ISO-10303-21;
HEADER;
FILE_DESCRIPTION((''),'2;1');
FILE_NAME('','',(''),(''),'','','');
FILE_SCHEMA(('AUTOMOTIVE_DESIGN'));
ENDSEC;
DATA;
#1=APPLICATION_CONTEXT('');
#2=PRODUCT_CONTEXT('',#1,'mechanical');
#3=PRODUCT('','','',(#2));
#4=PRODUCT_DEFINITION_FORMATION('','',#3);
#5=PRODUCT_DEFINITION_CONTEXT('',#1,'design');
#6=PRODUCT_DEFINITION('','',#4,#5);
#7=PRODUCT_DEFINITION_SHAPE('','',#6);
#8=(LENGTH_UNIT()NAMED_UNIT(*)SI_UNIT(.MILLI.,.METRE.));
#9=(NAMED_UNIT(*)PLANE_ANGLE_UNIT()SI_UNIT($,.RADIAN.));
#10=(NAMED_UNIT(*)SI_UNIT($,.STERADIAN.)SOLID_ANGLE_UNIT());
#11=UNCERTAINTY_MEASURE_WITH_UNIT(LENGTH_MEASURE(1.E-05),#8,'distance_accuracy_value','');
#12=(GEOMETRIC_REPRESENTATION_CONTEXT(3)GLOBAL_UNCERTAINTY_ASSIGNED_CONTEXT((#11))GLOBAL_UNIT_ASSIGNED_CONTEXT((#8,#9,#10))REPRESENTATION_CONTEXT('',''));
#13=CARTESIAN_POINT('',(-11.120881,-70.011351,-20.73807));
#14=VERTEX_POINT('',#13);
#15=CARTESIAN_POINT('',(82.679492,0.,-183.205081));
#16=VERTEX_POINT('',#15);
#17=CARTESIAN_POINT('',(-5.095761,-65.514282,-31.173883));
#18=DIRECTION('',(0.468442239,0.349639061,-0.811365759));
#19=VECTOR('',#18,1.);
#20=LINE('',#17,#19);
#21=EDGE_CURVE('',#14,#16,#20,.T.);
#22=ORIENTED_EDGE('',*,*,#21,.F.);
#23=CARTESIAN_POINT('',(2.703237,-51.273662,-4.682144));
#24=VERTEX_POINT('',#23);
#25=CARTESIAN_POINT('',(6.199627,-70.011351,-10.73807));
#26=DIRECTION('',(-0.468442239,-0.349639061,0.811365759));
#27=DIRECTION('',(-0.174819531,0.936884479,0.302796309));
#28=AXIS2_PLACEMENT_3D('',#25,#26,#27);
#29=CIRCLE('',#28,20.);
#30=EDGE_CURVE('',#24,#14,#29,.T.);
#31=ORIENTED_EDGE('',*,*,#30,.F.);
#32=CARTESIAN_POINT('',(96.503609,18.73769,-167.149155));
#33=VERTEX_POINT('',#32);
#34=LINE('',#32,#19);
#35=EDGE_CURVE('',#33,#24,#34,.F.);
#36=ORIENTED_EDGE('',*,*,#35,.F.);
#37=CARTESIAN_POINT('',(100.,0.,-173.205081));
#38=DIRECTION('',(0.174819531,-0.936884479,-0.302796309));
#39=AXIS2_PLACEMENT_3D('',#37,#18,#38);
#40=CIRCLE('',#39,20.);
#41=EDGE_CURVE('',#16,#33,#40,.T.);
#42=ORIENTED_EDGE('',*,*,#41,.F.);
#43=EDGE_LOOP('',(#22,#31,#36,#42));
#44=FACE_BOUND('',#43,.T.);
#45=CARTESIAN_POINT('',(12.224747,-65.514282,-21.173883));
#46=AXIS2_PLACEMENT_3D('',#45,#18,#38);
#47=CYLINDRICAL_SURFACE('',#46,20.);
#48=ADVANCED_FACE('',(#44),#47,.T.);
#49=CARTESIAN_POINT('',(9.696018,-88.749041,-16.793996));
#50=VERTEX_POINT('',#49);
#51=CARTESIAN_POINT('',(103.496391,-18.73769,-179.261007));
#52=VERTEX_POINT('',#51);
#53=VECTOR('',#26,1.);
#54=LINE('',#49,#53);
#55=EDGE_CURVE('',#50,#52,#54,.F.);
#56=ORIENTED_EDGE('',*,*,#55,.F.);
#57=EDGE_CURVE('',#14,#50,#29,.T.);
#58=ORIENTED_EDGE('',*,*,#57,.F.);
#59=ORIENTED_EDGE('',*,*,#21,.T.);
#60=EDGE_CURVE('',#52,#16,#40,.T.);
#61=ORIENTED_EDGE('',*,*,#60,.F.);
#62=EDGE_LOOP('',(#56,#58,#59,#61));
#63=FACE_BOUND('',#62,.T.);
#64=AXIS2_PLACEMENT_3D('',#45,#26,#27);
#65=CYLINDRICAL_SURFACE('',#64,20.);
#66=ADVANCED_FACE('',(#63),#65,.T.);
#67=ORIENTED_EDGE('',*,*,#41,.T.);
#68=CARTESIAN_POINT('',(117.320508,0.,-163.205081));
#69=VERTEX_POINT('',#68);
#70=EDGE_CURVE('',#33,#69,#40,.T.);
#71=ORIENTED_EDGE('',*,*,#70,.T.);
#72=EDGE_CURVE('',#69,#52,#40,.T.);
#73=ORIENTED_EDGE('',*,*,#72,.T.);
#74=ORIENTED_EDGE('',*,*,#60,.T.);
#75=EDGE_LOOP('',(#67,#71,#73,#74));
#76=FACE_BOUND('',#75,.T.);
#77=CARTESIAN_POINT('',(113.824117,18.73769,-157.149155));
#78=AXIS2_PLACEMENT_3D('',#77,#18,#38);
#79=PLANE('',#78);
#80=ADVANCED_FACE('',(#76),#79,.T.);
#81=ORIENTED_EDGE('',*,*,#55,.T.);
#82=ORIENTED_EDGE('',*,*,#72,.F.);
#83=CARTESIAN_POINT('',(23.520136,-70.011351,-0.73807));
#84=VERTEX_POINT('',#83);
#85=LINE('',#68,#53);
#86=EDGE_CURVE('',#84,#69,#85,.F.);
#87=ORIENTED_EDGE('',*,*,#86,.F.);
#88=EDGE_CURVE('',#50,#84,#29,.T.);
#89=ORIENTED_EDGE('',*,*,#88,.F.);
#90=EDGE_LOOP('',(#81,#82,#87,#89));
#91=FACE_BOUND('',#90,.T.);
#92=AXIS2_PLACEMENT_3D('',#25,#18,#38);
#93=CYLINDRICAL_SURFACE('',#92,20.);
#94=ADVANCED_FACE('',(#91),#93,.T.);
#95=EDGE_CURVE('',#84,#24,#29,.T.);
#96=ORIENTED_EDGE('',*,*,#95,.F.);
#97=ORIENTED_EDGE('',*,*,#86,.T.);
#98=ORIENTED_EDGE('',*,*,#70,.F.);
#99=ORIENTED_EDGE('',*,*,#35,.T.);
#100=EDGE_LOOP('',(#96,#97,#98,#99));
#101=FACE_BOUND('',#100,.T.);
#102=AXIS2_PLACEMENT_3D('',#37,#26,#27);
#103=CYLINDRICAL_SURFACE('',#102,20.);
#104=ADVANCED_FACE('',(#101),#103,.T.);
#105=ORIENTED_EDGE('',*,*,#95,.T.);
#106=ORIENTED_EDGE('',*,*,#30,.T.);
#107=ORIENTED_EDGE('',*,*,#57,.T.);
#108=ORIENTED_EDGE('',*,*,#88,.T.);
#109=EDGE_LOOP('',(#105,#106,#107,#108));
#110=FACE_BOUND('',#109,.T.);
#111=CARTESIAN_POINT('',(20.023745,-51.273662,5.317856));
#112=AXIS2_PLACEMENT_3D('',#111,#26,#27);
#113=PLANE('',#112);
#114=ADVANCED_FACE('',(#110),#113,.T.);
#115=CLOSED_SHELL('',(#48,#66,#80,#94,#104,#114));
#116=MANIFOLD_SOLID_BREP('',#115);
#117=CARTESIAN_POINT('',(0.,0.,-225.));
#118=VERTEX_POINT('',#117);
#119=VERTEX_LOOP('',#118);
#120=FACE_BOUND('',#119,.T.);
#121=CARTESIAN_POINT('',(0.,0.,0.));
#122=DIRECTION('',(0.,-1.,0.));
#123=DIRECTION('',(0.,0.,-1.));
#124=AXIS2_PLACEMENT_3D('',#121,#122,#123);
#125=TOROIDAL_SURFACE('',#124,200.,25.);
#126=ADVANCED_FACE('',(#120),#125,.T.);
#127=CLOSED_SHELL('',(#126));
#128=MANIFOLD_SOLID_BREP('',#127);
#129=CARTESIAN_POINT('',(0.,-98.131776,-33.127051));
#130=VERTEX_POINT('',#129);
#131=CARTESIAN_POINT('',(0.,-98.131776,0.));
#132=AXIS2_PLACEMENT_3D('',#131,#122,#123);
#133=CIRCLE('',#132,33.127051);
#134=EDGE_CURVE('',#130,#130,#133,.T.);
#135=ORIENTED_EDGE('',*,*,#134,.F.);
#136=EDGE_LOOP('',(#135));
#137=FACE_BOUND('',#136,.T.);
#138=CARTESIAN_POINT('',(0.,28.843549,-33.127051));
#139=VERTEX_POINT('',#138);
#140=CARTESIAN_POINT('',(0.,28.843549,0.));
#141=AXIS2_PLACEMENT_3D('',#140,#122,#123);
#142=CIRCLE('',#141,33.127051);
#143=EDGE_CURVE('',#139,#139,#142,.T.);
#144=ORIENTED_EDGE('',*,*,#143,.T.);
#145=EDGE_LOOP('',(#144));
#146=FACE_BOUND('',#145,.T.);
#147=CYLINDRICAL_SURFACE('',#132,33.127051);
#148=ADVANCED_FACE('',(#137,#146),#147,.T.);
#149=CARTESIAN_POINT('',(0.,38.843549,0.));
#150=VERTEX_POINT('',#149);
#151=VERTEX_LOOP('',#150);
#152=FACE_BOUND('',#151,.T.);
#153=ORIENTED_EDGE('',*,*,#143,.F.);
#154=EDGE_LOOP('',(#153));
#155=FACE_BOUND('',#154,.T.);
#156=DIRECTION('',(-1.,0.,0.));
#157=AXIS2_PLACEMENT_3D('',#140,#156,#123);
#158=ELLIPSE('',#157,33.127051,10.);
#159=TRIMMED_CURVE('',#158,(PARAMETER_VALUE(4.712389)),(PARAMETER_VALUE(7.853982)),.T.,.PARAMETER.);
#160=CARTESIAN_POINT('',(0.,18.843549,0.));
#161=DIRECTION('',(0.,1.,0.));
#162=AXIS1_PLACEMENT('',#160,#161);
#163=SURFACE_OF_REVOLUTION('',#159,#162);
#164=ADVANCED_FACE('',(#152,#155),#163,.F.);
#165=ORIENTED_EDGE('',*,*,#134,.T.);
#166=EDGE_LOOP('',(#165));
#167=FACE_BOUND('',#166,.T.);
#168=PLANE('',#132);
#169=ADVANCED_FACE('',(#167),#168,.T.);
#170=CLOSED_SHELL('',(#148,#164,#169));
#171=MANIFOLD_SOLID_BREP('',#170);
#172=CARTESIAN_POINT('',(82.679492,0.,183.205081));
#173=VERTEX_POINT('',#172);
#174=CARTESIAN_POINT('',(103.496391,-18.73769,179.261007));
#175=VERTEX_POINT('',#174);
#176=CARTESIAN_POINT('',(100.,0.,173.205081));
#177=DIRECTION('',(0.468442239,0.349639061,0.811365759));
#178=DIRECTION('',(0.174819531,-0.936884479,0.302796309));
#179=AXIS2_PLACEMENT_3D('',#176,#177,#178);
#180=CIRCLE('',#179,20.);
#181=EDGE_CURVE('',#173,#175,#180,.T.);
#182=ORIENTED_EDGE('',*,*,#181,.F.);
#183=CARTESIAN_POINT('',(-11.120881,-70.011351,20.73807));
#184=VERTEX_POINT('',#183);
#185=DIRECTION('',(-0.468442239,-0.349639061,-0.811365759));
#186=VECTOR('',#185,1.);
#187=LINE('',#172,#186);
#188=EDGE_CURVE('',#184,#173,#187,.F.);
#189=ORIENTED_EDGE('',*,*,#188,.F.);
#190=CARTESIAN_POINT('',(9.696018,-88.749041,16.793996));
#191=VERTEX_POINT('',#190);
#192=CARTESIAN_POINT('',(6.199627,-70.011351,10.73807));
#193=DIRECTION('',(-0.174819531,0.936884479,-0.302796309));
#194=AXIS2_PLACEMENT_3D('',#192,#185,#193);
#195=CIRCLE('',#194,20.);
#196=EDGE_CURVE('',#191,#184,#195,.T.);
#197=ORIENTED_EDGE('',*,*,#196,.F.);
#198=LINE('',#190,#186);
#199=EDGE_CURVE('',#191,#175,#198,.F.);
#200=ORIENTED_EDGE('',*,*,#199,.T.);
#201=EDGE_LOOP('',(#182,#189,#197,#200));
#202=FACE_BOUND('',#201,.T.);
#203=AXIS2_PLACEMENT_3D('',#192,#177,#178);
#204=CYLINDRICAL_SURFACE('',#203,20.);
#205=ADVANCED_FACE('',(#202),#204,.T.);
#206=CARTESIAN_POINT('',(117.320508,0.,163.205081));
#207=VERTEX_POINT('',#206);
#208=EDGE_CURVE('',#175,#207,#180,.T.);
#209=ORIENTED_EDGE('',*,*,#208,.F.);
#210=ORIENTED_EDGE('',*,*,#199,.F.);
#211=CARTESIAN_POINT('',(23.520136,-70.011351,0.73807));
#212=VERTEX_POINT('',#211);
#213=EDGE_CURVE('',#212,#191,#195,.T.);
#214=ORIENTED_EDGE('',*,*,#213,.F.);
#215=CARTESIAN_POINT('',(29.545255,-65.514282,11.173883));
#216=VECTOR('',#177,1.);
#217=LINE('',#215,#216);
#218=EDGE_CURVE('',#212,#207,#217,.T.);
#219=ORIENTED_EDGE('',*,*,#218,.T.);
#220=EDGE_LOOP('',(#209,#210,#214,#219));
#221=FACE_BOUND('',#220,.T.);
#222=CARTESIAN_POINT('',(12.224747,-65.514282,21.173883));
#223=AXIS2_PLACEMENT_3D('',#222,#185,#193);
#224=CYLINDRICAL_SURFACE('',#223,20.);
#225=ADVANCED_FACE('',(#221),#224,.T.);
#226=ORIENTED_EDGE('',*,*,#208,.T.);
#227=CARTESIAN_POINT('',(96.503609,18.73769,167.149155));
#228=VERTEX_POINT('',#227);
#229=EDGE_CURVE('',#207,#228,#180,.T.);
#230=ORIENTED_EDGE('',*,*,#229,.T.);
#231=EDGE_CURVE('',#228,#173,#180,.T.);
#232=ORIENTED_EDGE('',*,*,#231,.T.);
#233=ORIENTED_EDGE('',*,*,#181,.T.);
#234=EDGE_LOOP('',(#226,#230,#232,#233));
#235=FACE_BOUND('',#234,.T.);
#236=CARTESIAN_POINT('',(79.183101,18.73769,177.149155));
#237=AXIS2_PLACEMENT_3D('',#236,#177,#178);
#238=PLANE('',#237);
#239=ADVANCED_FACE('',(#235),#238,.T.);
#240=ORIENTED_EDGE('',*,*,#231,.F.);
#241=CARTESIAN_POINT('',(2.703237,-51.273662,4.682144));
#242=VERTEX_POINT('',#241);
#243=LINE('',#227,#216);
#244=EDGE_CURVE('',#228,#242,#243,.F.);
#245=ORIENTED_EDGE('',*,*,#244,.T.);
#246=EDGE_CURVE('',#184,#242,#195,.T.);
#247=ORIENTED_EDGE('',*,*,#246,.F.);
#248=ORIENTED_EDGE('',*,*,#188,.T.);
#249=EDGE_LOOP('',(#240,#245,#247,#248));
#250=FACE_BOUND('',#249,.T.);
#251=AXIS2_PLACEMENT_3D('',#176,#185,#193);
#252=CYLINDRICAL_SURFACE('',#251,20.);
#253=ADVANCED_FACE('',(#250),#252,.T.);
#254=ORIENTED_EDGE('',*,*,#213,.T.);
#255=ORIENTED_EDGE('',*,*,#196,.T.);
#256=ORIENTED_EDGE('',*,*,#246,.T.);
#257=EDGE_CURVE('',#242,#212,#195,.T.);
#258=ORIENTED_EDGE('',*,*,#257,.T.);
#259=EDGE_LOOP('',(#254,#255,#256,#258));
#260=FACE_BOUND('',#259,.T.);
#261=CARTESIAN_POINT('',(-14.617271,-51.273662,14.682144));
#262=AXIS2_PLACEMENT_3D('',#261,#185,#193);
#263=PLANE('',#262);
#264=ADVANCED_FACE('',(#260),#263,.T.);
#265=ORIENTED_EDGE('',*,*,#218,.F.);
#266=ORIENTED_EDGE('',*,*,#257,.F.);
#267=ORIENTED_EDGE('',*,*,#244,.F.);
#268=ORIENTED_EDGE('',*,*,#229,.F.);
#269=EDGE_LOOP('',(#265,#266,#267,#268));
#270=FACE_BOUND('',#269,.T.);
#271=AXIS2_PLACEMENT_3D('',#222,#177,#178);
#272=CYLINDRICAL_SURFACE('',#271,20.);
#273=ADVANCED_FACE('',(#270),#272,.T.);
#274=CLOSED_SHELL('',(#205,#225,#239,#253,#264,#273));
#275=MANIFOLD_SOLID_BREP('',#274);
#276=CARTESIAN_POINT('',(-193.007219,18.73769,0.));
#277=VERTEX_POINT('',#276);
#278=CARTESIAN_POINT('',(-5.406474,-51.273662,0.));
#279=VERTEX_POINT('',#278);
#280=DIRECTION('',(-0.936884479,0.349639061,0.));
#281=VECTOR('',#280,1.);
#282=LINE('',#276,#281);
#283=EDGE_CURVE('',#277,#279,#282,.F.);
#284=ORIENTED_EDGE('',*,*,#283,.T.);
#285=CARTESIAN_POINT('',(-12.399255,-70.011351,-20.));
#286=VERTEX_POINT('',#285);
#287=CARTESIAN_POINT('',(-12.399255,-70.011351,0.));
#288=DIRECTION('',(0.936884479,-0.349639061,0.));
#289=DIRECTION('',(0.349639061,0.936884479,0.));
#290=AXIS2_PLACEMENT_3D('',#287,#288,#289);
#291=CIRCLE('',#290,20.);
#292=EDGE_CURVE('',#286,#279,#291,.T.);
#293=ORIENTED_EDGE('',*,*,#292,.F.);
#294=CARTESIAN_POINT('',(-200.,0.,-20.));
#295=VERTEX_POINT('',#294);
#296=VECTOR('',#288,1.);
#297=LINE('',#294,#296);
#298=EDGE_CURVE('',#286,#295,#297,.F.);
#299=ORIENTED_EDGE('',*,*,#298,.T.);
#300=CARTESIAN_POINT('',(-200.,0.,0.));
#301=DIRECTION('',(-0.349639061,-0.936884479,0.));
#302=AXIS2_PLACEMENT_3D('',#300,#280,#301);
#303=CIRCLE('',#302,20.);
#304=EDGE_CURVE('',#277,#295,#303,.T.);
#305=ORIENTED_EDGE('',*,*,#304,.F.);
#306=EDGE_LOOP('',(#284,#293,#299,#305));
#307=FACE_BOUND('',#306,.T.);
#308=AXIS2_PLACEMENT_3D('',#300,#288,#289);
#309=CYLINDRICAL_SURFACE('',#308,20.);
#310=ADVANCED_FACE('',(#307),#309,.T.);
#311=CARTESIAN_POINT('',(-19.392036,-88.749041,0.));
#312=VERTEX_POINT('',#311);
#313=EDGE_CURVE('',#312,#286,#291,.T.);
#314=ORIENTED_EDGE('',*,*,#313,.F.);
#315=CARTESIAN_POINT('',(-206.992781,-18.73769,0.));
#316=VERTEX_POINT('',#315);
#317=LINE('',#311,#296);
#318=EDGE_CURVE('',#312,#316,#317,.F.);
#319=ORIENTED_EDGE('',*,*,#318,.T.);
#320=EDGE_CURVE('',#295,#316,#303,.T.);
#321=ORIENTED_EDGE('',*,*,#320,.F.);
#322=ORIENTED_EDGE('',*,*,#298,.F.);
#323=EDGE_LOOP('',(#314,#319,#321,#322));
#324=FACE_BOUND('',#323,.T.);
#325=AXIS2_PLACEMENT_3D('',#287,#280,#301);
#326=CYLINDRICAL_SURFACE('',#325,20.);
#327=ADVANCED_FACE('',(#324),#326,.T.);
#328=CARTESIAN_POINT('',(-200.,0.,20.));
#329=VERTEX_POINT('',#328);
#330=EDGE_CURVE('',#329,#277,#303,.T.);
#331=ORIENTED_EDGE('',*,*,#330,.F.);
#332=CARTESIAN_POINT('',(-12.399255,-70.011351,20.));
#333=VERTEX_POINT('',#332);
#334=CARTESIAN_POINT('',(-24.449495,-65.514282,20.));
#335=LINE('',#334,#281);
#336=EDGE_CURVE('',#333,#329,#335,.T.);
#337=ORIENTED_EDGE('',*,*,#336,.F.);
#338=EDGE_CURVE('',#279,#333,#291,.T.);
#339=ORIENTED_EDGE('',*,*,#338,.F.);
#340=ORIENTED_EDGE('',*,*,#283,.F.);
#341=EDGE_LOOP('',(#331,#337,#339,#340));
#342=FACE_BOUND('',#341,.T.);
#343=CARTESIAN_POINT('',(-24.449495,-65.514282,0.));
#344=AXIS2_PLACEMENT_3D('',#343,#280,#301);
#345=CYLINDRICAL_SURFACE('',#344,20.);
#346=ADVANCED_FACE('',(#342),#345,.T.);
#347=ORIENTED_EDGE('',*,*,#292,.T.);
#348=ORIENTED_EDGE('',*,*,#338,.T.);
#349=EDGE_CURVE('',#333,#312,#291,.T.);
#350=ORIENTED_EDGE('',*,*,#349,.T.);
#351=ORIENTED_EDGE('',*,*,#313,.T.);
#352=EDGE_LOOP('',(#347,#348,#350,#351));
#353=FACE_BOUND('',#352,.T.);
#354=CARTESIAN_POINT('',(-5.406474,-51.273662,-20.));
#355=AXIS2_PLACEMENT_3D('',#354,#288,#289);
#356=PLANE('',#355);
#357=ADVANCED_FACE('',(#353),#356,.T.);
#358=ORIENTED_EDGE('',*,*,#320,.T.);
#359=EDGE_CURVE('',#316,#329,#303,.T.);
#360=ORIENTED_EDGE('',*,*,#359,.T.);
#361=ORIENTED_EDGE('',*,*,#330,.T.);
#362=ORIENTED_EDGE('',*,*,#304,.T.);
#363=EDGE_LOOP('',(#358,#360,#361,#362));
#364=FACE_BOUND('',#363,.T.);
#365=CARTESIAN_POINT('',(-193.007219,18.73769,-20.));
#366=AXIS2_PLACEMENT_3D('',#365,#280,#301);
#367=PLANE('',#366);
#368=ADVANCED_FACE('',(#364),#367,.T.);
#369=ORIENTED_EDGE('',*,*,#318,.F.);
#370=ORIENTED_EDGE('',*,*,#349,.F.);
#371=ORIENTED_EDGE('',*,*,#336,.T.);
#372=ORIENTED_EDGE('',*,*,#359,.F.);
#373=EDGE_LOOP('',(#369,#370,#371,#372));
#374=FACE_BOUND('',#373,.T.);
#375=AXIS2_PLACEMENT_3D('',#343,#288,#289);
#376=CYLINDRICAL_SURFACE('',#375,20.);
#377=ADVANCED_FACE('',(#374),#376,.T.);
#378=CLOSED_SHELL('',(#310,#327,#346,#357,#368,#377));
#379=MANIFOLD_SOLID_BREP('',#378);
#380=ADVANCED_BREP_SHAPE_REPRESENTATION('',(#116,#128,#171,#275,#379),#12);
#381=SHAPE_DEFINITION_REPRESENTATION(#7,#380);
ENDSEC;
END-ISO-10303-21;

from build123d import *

# Parameters (mm, degrees)
SKETCH1_R                = 25
SKETCH1_W                = 33.127050545
SKETCH1_H                = 126.975324737
DOME1_FACE_RADIUS        = 33.127050545
DOME1_HEIGHT             = 10
BOSS_EXTRUDE1_DEPTH      = 20
BOSS_EXTRUDE1_DEPTH_BACK = 20
FILLET1_R                = 20
FILLET2_R                = 20
CIRPATTERN2_COUNT        = 3


with BuildPart() as part:
    # Sketch1 → Revolve1 (revolve)
    with BuildSketch(Plane.XY, mode=Mode.PRIVATE) as revolve1_sk:
        with Locations((200, 0)):
            Circle(SKETCH1_R)
        with Locations((16.563525273, -34.644113748)):
            Rectangle(SKETCH1_W, SKETCH1_H)
    revolve(revolve1_sk.sketch.rotate(Axis((0, -98.131776117, 0), (0, 1, 0)), 90), axis=Axis((0, -98.131776117, 0), (0, 1, 0)))

    # Dome1: an elliptical dome of height H over a round flat face of radius A is half a spheroid: the quarter ellipse of half axes A and H revolved about the face's axis
    with BuildSketch(Plane((0, 28.84354862, 0), x_dir=(0, 0, -1), z_dir=(1, 0, 0)), mode=Mode.PRIVATE) as dome1_quarter:
        Ellipse(DOME1_FACE_RADIUS, DOME1_HEIGHT)
        Rectangle(DOME1_FACE_RADIUS, DOME1_HEIGHT, align=(Align.MIN, Align.MIN), mode=Mode.INTERSECT)
    revolve(dome1_quarter.sketch, axis=Axis((0, 28.84354862, 0), (0, 1, 0)))


with BuildPart() as body_2:
    # Sketch2 → Boss-Extrude1 (new, two sides: drawn at the far end of the back side and taken through both)
    with BuildSketch(Plane.XY.offset(-BOSS_EXTRUDE1_DEPTH_BACK)):
        Polygon((-206.992781228, -18.737689578), (-32.627553009, -83.80963399), (-19.392036111, -88.749040939), (-5.406473656, -51.273661784), (-18.641990554, -46.334254835), (-193.007218772, 18.737689578), align=None)
    extrude(amount=BOSS_EXTRUDE1_DEPTH + BOSS_EXTRUDE1_DEPTH_BACK)

    # Fillet1
    fillet1_edges = [body_2.edges().sort_by_distance(p)[0] for p in [
        (-113.192408669, -53.743365258, -20),
        (-99.206846214, -16.267986103, 20),
        (-113.192408669, -53.743365258, 20),
    ]]
    fillet(fillet1_edges, radius=FILLET1_R - 0.0001)  # a hair under: the kernel refuses the full size

    # Fillet2
    fillet2_edges = [body_2.edges().sort_by_distance(p)[0] for p in [
        (-99.206846214, -16.267986103, -20),
    ]]
    fillet(fillet2_edges, radius=FILLET2_R)


with BuildPart() as cirpattern2_1:
    # CirPattern2: pattern copy
    add(body_2.part.rotate(Axis((0, 0, 0), (0, 1, 0)), 1 * 360 / CIRPATTERN2_COUNT))


with BuildPart() as cirpattern2_2:
    # CirPattern2: pattern copy
    add(body_2.part.rotate(Axis((0, 0, 0), (0, 1, 0)), 2 * 360 / CIRPATTERN2_COUNT))


solid = Compound([part.part, body_2.part, cirpattern2_1.part, cirpattern2_2.part])
